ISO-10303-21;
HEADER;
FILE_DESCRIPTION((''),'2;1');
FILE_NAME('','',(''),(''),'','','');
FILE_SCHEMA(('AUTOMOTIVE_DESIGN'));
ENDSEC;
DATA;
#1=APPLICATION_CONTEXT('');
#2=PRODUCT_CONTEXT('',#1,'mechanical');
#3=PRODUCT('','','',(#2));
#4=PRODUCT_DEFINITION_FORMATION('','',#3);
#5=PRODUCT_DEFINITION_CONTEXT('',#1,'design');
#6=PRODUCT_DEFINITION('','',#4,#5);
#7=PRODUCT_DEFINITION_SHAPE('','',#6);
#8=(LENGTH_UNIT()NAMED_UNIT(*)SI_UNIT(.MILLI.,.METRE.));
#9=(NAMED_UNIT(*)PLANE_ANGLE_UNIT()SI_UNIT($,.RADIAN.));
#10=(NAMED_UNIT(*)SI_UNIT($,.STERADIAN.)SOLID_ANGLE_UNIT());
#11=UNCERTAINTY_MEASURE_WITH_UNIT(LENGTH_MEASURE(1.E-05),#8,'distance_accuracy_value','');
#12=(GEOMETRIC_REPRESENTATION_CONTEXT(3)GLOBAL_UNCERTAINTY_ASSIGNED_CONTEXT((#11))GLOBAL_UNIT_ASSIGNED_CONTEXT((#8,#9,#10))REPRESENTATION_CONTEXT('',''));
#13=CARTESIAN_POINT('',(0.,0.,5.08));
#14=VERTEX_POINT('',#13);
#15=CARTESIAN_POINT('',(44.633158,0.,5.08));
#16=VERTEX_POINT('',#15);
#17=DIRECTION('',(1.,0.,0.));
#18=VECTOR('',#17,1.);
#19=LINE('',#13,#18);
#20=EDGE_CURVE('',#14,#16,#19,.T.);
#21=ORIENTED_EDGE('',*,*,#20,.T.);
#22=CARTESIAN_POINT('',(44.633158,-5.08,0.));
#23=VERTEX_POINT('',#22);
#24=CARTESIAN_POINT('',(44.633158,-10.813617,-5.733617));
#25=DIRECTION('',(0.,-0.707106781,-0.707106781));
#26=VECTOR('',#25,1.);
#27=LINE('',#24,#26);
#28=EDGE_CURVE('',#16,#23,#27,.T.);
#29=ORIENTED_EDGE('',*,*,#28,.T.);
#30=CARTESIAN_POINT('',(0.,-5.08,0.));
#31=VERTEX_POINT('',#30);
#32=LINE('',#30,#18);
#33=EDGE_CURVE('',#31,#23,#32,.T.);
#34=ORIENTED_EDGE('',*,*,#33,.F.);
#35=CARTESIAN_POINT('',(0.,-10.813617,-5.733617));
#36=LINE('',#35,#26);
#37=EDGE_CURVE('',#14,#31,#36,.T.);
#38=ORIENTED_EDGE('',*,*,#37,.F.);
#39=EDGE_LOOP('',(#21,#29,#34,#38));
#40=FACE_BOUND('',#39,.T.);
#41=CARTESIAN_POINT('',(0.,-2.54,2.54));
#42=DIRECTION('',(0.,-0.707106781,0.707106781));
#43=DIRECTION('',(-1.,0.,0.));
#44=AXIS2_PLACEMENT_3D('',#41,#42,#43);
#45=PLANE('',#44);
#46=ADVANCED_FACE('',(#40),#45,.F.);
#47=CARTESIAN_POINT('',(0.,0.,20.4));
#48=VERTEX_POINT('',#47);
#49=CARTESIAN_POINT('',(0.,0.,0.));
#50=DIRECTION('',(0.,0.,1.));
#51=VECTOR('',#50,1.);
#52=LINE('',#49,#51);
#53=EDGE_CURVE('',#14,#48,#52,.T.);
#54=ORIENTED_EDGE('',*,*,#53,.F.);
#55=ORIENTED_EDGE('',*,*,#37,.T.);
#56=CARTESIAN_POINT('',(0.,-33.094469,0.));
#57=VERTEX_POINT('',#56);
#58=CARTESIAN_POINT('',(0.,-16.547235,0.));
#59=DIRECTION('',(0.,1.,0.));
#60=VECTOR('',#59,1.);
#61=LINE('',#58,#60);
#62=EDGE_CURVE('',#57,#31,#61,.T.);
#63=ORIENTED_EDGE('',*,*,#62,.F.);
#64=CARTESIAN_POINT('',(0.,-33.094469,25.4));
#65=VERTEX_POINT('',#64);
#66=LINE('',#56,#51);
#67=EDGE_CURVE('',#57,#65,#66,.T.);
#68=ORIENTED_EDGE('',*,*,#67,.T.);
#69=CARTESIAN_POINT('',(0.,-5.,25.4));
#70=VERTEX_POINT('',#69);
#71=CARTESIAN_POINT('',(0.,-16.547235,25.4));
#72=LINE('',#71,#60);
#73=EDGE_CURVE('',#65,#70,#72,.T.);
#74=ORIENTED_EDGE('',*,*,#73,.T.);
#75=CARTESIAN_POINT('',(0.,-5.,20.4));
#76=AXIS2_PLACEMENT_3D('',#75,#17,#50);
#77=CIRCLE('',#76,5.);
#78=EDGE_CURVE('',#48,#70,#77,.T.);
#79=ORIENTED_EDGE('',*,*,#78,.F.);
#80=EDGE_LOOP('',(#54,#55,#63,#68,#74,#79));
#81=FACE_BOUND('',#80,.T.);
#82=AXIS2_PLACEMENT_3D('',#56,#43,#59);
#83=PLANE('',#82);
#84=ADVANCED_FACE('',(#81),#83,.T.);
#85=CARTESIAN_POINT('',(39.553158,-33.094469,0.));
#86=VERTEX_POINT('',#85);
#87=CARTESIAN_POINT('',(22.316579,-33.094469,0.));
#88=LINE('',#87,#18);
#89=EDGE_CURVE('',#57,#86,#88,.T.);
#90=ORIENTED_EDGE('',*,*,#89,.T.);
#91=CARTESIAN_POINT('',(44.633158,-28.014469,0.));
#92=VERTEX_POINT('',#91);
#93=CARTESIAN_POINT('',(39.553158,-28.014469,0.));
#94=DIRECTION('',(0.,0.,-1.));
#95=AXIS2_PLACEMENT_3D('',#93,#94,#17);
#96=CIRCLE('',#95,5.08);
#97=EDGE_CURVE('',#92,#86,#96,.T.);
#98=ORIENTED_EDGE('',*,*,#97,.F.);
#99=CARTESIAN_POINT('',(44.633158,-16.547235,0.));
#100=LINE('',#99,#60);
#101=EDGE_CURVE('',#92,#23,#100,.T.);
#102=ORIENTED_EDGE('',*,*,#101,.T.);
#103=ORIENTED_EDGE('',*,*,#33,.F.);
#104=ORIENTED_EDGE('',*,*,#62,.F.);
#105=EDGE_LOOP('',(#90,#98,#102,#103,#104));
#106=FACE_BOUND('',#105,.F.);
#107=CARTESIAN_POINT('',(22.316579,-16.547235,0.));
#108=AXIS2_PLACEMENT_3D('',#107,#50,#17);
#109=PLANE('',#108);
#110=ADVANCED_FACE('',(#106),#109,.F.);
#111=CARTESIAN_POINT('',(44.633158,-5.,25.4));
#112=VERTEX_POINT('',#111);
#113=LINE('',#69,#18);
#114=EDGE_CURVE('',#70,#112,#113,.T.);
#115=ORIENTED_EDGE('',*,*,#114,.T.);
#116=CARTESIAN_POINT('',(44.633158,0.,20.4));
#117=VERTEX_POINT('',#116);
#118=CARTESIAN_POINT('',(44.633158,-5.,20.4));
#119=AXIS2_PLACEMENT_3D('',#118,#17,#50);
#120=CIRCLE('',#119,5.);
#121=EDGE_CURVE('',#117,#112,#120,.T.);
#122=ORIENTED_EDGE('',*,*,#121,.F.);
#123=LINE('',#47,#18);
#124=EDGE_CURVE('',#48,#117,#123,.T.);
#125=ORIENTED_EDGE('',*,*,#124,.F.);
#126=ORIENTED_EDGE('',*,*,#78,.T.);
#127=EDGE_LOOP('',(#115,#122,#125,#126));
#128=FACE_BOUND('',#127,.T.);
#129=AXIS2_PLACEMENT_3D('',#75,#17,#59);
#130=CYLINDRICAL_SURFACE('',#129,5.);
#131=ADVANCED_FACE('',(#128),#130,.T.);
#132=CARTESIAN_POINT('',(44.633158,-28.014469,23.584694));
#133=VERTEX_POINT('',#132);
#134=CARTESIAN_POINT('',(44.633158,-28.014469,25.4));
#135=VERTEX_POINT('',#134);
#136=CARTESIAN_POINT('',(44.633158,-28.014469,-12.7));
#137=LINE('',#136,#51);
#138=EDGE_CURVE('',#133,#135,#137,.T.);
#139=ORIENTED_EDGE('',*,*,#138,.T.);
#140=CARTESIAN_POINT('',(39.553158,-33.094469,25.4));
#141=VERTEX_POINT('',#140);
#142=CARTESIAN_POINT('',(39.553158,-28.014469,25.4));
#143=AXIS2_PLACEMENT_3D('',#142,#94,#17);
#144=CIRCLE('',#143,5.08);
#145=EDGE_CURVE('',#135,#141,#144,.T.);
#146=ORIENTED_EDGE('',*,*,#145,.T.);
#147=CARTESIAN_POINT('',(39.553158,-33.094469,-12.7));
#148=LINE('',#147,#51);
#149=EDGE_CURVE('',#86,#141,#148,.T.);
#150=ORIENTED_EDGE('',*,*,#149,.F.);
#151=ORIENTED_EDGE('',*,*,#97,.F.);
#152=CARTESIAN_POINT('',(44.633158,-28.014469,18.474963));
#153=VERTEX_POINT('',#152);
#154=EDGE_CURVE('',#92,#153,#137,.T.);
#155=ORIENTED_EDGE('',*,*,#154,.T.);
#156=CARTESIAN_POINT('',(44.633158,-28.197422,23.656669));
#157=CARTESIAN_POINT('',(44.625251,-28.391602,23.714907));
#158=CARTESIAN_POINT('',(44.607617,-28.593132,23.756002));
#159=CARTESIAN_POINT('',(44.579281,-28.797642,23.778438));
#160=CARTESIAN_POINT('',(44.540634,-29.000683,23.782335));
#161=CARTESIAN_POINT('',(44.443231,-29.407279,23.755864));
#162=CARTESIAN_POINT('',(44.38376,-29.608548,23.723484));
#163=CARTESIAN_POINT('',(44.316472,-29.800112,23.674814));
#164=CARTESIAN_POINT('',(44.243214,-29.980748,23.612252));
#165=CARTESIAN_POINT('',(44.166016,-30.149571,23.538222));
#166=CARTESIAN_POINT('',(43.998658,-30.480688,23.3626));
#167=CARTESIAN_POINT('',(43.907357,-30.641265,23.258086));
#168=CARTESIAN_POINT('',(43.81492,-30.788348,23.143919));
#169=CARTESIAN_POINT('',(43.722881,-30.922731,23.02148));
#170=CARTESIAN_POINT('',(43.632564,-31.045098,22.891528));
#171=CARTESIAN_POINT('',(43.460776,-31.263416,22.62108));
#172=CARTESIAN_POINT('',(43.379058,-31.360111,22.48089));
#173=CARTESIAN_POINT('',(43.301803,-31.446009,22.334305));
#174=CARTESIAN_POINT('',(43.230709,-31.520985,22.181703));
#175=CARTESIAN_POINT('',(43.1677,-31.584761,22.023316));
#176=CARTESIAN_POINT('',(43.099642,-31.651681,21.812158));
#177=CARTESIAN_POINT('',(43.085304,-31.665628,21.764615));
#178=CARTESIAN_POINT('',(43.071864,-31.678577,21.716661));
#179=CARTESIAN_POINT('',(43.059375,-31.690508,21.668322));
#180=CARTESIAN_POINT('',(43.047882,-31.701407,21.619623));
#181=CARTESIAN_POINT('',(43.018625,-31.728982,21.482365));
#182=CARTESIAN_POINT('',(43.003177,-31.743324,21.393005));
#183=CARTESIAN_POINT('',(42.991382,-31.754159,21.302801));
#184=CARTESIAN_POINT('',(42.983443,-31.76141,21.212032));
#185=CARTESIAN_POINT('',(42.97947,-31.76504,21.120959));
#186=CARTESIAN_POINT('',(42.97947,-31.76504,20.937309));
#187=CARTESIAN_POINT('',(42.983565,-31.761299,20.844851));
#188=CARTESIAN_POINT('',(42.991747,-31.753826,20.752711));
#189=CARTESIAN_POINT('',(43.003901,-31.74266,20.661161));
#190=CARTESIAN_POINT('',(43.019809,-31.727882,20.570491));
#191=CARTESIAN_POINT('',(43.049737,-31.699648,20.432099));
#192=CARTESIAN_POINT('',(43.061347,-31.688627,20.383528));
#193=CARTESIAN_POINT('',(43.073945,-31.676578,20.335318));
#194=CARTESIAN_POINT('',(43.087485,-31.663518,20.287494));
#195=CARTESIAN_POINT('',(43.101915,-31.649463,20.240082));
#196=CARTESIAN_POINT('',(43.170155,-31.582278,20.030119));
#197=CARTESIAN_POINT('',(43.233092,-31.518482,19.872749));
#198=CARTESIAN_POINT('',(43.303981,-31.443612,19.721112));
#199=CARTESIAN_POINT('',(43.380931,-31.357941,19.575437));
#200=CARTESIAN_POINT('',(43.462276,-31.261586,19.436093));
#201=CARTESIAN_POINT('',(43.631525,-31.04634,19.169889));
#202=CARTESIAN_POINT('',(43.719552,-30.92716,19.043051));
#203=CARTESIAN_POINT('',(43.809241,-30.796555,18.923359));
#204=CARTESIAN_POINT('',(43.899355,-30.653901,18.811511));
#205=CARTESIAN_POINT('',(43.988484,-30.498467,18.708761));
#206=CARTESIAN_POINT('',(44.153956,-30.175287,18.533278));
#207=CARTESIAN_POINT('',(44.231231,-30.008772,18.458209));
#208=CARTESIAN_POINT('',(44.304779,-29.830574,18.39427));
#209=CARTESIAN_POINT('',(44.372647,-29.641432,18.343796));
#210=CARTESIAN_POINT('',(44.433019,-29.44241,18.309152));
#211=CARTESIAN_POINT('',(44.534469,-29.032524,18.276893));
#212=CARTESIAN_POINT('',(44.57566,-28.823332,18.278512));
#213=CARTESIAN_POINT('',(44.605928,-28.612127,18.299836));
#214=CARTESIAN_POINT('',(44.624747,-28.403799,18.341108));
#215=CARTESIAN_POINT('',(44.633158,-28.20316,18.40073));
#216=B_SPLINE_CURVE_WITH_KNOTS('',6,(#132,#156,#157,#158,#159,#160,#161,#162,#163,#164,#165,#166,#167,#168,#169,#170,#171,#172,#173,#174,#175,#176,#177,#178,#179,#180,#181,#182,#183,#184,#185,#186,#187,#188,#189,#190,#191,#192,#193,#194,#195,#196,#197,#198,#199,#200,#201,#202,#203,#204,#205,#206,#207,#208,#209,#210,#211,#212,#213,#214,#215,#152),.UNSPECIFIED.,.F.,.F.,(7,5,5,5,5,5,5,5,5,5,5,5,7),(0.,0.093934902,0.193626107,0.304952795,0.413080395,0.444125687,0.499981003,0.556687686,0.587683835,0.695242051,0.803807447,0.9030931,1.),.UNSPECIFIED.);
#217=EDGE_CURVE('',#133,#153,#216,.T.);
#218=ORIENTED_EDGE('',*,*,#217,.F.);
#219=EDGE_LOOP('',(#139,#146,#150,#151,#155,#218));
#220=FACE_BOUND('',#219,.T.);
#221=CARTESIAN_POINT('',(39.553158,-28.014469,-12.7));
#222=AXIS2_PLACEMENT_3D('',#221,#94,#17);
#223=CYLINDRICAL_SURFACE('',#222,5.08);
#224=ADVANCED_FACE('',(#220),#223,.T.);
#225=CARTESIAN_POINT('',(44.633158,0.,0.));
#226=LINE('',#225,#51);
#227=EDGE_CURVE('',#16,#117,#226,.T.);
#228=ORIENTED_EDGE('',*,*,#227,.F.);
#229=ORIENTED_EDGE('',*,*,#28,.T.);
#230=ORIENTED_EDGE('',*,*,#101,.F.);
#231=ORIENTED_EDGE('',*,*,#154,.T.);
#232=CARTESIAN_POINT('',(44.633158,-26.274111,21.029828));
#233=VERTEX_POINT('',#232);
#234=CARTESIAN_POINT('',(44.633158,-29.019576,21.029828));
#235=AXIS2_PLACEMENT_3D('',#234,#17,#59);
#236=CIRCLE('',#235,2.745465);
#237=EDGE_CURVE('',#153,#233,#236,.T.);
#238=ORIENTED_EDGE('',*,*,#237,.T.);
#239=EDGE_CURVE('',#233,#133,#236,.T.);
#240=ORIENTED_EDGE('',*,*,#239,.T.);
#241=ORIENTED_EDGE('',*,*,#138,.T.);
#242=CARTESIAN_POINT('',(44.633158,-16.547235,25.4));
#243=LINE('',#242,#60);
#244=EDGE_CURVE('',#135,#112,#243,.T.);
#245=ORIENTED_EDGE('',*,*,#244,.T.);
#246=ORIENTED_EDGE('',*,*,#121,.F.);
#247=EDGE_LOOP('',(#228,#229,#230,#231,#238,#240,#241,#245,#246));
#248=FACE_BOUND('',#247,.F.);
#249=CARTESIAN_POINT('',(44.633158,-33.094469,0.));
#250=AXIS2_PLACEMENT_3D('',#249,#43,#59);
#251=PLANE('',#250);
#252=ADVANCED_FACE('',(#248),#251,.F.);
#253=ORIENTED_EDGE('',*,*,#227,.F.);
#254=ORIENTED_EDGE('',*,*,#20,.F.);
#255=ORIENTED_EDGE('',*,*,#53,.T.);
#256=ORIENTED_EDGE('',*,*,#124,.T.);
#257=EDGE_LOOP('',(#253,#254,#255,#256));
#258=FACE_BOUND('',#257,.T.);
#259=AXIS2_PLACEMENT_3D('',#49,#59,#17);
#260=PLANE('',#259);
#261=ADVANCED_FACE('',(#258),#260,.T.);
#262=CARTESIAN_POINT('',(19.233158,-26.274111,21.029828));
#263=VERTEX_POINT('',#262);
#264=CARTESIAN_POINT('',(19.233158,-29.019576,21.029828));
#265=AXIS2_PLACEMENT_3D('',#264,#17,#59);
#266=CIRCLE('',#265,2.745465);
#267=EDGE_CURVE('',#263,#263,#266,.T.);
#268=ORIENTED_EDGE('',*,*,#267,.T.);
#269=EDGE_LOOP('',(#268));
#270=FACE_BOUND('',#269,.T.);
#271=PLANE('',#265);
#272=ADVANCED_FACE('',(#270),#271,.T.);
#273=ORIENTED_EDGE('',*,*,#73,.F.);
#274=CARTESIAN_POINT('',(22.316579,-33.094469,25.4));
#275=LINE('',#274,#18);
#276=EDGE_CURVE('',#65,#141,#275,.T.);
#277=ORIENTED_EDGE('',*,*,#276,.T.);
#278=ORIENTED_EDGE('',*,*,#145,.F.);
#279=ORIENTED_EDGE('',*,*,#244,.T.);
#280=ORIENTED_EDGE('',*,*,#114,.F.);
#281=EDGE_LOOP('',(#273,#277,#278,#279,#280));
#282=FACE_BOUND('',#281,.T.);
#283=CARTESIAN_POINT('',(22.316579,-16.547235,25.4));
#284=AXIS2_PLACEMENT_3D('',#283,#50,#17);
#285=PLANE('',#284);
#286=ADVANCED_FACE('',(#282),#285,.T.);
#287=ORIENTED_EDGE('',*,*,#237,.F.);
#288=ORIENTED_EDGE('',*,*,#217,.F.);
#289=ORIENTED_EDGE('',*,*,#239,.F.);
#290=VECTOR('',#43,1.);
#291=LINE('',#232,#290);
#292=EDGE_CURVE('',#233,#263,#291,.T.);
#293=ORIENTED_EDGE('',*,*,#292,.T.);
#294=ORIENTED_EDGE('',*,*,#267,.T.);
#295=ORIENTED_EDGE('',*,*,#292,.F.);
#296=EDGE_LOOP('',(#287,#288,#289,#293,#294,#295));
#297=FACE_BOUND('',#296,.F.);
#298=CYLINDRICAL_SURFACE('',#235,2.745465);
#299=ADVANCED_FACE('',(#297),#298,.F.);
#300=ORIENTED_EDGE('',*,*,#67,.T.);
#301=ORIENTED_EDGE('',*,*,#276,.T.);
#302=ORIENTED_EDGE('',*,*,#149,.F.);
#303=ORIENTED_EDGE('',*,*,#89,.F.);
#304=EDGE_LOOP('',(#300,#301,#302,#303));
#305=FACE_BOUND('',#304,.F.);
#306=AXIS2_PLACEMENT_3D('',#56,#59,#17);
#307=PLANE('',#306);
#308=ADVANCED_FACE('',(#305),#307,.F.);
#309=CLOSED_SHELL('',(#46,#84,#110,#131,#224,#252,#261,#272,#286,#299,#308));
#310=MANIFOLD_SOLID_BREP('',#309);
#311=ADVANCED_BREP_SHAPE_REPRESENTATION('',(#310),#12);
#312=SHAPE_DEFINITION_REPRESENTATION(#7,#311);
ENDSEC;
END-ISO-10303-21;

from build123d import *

# Parameters (mm, degrees)
F0_W        = 44.6331575513
F0_H        = 33.0944694579
F1_DEPTH    = 25.4
F2_R        = 5
F3_SIZE     = 5.08
F4_R        = 2.7454645763
F5_DEPTH    = 25.4
F6_T1_DEPTH = 50.8


# Not quite as in the source:
# - a fillet or chamfer that OpenCascade refuses, or shapes differently, is made with other operations: its cross-section is extruded or revolved along the edge and cut away or added


with BuildPart() as f1:
    # F0 (on Top) → F1 (new body)
    with BuildSketch(Plane.XY):
        with Locations((22.3165787756, -16.5472347289)):
            Rectangle(F0_W, F0_H)
    extrude(amount=F1_DEPTH)

    # F2
    f2_edges = [f1.edges().sort_by_distance(p)[0] for p in [
        (22.316579, 0, 25.4),
    ]]
    fillet(f2_edges, radius=F2_R)

    # F3
    f3_edges = [f1.edges().sort_by_distance(p)[0] for p in [
        (22.316579, 0, 0),
    ]]
    chamfer(f3_edges, length=F3_SIZE)

    # F4 (on face) → F5 (cut)
    with BuildSketch(Plane.YZ.offset(44.6331575513)):
        with Locations((-29.0195755661, 21.0298281163)):
            Circle(F4_R)
    extrude(amount=-F5_DEPTH, mode=Mode.SUBTRACT)

    # F6: fillet of radius 5.08 on 1 edges, made by hand

    # F6_s2 → F6_t1 (cut)
    with BuildSketch(Plane.XY.offset(-12.7)):
        with BuildLine():
            ThreePointArc((44.6331575513, -28.0144694579), (43.1452599997, -31.6065719063), (39.5531575513, -33.0944694579))
            Line((39.5531575513, -33.0944694579), (44.6331575513, -33.0944694579))
            Line((44.6331575513, -33.0944694579), (44.6331575513, -28.0144694579))
        make_face()
    extrude(amount=F6_T1_DEPTH, mode=Mode.SUBTRACT)


solid = f1.part
